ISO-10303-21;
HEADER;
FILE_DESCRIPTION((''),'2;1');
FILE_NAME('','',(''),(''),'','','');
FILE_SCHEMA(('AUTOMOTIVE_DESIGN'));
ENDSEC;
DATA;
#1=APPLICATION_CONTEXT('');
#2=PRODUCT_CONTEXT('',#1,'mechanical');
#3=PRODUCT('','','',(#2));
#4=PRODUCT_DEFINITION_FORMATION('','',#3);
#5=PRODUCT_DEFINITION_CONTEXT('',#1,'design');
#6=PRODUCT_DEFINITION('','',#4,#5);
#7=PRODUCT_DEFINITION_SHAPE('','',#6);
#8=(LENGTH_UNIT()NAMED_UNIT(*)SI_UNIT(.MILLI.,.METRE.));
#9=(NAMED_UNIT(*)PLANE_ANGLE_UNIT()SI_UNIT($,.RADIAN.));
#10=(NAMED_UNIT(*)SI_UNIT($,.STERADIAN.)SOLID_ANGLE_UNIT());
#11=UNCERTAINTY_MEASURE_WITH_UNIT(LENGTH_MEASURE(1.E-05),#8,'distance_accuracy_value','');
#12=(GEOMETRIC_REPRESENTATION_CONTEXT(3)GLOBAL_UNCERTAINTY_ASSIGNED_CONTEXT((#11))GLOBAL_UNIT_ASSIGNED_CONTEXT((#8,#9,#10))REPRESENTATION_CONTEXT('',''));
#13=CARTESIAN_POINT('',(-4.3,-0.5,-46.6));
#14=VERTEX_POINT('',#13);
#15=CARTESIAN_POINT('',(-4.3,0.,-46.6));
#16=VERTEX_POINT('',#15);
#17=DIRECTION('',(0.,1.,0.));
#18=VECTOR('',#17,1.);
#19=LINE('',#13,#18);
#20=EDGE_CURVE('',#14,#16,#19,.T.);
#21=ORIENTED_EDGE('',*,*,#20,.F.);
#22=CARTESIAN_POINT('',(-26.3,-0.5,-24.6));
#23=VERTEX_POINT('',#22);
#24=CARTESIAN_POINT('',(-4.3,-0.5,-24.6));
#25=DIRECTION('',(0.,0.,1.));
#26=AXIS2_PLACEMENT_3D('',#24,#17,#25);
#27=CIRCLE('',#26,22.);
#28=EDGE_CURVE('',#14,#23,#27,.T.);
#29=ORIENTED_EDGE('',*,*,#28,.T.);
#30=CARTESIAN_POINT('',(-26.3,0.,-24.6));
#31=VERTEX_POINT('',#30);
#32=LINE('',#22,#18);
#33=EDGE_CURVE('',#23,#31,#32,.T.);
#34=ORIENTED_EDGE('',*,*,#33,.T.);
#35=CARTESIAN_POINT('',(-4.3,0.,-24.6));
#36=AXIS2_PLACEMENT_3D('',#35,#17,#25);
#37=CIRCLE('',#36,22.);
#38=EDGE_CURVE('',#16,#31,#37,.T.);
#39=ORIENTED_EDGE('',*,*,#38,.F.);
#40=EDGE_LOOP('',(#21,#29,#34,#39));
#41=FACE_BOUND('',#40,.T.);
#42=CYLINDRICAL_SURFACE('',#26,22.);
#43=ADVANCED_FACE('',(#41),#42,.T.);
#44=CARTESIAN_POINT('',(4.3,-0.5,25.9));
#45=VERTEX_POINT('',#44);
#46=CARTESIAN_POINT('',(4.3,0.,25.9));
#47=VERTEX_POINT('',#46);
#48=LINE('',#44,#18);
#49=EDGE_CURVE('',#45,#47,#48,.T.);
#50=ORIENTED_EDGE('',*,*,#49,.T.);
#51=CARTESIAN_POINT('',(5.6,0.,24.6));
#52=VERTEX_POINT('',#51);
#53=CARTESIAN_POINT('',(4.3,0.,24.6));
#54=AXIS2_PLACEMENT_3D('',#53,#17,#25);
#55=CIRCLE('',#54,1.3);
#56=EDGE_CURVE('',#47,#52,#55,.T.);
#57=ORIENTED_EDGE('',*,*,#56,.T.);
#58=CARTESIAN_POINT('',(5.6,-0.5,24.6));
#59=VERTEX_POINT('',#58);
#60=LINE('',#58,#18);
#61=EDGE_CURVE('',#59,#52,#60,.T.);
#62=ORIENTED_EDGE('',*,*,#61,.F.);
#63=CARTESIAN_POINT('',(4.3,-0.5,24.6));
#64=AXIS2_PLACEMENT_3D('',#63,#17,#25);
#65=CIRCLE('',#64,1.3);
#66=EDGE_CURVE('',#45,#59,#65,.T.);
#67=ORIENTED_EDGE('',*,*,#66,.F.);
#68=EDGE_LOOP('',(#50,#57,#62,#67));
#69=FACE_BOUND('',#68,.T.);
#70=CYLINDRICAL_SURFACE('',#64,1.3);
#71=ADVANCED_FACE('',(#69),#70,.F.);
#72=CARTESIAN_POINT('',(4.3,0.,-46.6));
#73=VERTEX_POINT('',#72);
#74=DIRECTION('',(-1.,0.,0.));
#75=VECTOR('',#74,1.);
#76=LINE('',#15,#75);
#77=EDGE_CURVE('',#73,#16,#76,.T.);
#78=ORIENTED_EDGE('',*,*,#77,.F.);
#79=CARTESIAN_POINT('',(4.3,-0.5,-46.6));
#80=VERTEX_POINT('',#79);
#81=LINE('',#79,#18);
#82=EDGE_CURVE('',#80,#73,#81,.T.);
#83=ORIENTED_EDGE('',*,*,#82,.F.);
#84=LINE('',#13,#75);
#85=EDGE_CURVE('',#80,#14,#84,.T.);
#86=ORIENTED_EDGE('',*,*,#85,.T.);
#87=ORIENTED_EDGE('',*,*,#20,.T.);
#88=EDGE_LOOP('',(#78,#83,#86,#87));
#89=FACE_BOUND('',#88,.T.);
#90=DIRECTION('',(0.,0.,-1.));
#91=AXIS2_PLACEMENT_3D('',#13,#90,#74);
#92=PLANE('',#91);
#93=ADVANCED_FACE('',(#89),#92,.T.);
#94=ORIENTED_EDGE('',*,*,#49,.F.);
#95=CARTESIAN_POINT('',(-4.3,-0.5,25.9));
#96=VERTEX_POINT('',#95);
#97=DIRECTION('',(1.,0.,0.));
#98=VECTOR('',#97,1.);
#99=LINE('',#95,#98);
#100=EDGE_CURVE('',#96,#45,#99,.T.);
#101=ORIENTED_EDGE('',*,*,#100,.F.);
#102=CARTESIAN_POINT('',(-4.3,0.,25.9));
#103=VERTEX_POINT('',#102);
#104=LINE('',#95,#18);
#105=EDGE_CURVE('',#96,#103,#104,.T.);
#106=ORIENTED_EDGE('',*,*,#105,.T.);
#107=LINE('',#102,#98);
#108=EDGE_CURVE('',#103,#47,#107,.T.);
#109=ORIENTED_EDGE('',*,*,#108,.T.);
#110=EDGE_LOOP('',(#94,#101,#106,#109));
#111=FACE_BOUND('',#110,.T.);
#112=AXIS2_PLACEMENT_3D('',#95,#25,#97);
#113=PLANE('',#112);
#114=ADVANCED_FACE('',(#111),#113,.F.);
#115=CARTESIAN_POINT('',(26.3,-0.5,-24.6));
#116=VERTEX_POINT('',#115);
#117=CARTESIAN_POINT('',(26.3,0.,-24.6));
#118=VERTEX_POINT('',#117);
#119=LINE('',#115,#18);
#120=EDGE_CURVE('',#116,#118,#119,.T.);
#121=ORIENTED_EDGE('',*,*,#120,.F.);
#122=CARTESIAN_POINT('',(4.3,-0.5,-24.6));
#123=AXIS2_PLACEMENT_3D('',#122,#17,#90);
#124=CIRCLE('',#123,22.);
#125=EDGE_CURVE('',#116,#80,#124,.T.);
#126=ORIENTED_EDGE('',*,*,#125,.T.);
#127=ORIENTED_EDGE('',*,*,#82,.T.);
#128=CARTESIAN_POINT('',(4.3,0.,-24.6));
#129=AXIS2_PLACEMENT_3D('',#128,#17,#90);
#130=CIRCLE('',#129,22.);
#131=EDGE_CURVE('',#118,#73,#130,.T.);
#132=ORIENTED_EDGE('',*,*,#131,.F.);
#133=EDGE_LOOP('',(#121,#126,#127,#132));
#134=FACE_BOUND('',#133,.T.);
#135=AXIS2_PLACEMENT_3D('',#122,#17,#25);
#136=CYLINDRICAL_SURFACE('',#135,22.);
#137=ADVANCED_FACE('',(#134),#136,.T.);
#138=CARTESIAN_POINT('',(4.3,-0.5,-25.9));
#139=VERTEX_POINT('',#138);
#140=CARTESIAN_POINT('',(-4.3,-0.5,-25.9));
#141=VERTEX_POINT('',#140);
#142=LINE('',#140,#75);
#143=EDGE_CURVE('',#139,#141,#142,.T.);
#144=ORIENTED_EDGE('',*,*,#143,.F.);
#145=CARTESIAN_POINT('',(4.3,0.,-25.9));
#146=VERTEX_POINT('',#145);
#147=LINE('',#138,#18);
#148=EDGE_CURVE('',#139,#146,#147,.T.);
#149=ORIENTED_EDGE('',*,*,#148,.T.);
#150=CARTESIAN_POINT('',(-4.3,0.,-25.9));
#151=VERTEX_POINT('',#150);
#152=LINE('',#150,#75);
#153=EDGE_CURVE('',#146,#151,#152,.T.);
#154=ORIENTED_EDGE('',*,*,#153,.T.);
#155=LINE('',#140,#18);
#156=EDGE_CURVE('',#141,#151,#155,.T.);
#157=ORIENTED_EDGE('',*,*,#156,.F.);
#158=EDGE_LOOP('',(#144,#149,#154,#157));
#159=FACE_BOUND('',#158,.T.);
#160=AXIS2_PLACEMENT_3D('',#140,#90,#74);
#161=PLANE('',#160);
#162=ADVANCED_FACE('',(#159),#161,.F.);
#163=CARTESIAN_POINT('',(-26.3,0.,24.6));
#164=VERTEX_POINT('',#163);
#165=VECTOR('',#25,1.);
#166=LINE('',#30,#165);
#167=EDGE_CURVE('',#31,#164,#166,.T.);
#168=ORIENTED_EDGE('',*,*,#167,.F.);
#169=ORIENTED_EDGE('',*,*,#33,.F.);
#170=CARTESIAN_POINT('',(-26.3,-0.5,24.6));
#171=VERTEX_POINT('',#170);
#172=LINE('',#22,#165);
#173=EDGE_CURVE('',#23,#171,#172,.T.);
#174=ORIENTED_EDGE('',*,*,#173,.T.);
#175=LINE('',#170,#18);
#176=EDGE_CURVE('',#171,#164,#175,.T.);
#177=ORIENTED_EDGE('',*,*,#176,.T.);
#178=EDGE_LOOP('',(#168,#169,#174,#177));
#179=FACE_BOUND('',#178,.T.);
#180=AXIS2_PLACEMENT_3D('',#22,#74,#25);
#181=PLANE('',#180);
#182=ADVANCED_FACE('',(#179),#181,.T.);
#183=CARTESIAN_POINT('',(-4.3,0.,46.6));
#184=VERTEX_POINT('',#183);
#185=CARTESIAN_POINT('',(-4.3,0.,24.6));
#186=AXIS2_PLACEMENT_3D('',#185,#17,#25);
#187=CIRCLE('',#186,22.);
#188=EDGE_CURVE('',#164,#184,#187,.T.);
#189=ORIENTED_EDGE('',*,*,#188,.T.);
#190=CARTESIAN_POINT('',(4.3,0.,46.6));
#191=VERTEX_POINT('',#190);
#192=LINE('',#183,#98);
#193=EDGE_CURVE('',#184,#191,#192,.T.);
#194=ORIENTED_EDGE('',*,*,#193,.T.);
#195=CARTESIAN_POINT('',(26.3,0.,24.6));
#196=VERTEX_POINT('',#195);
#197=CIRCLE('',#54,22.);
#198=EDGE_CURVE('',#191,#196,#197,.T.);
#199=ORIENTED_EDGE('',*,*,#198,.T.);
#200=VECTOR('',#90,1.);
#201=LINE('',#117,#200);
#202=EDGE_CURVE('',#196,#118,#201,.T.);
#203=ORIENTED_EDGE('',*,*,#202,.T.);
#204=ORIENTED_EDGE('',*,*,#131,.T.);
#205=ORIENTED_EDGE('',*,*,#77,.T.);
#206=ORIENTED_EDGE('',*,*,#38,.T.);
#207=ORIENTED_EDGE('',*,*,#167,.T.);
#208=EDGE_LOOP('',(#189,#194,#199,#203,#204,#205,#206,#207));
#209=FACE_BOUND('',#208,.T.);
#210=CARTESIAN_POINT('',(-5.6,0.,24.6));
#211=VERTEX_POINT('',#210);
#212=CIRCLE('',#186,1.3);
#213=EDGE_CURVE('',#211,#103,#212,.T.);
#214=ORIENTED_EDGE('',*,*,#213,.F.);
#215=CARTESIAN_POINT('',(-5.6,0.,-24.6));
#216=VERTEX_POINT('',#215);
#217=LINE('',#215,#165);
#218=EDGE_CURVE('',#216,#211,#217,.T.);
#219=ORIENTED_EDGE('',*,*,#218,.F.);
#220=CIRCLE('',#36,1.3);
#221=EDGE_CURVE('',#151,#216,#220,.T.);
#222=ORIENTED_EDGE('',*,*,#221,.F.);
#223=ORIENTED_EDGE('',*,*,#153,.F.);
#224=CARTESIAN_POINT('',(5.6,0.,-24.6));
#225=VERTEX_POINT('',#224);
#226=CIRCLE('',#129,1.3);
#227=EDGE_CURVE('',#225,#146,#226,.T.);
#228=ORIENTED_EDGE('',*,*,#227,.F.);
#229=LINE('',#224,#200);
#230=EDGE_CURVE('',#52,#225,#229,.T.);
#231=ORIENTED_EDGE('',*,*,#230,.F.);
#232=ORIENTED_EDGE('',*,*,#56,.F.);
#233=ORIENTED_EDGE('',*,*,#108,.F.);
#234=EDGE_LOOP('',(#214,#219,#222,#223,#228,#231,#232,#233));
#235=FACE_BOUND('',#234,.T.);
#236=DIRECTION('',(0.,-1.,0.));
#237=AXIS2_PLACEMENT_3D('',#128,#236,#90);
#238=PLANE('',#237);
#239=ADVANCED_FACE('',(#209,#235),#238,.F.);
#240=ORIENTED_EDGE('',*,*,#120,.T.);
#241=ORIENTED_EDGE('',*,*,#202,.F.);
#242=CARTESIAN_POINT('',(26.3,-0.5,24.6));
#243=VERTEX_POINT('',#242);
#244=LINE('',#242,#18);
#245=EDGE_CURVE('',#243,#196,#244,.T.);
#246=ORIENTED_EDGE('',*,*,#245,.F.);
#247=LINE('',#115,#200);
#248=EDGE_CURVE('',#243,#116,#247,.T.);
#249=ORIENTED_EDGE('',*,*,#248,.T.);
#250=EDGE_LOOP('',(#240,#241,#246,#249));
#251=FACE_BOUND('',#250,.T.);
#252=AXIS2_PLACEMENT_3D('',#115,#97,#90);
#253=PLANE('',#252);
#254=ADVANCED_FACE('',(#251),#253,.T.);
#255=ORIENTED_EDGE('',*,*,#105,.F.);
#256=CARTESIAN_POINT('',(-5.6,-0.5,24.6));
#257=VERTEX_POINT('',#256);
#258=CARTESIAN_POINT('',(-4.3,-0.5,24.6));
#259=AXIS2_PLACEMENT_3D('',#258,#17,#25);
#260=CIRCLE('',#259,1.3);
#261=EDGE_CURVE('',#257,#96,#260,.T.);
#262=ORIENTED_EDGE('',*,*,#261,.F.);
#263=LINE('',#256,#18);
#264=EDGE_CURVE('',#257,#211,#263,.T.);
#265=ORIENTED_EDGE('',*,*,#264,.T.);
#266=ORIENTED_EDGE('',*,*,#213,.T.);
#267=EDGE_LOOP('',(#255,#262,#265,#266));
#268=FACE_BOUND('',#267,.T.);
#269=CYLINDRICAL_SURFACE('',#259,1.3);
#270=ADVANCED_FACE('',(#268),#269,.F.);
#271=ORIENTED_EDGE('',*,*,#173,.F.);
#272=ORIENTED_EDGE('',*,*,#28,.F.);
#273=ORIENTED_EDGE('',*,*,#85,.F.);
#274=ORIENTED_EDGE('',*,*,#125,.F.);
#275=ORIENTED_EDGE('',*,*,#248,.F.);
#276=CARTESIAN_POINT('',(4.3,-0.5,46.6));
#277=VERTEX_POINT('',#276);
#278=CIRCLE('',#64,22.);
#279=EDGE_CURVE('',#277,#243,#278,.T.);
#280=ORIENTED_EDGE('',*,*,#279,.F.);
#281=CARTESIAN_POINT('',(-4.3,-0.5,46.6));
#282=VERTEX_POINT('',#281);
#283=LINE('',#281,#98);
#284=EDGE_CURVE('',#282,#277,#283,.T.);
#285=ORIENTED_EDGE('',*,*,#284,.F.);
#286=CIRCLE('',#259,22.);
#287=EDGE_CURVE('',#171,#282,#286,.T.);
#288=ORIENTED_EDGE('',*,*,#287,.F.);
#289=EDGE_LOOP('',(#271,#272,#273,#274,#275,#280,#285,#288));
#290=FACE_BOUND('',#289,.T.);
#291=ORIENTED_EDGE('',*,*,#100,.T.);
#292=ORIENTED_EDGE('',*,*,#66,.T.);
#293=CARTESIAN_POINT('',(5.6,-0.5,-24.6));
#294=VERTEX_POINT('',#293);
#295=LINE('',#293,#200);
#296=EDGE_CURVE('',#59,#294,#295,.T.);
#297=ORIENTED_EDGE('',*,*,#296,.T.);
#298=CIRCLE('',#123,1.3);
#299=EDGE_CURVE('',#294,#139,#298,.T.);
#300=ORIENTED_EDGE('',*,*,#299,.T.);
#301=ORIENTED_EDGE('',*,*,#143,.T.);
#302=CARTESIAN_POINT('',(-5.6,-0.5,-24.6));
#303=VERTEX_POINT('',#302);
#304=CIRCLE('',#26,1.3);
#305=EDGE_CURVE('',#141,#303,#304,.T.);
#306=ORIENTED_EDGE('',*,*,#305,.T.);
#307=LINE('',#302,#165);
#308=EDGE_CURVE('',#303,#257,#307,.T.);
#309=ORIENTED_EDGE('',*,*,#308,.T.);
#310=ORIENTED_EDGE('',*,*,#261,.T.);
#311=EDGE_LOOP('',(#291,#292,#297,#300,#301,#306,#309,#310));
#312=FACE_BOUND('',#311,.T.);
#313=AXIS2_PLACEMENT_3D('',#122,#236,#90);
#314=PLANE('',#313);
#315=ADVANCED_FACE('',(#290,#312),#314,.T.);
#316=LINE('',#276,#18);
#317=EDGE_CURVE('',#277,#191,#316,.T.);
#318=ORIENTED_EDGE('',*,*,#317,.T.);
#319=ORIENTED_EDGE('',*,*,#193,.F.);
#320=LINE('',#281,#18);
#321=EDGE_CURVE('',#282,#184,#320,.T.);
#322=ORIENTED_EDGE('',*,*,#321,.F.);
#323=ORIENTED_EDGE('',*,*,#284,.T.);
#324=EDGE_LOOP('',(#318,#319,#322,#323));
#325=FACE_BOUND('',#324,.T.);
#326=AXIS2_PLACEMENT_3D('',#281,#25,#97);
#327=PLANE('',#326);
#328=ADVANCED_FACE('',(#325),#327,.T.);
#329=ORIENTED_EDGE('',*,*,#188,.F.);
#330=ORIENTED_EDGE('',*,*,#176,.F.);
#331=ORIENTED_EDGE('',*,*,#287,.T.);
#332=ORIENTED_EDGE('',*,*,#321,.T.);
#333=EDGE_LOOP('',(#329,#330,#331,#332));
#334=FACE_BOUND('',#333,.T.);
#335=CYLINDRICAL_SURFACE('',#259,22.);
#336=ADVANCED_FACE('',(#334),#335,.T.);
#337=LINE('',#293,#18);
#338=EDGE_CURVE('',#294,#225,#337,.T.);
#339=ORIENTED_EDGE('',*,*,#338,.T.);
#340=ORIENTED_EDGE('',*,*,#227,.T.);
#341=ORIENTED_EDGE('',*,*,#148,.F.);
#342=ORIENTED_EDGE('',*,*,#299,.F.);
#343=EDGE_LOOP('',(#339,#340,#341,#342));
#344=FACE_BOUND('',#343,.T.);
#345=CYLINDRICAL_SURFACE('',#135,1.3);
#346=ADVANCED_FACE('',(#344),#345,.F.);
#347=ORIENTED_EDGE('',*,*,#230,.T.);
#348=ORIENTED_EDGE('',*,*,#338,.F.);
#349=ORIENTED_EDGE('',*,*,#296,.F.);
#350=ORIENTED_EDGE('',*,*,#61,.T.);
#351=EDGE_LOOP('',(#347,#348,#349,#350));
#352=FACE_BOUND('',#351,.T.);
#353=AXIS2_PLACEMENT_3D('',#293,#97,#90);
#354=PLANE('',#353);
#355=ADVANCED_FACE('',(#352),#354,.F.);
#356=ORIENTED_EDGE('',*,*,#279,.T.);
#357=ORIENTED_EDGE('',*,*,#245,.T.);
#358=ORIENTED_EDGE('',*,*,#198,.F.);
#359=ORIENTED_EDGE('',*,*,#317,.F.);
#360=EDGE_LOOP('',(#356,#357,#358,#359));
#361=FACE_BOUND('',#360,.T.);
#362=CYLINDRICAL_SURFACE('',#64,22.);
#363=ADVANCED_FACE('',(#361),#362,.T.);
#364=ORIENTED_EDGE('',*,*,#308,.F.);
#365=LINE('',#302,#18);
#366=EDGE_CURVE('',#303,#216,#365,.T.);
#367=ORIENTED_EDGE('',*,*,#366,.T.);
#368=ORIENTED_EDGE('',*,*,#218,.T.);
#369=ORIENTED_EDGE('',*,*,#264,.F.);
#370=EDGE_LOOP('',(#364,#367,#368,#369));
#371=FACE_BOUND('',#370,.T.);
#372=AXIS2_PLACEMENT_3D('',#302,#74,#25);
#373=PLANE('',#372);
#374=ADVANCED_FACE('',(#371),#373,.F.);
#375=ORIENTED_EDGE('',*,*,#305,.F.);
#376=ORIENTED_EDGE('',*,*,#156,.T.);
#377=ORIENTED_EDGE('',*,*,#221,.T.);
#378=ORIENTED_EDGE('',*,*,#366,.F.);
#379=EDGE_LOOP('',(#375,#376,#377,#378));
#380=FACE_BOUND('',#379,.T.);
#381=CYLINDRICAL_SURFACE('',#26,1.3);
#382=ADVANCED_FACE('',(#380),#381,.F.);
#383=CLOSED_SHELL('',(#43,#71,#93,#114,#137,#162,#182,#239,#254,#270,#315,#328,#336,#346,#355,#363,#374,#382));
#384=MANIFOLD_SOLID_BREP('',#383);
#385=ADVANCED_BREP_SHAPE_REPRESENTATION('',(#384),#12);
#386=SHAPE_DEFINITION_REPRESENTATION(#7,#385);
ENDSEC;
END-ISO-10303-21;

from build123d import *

# Parameters (mm, degrees)
SM_BASE_FLANGE_1_DEPTH = 0.5


# Sheet-metal steps are written as plain solids
with BuildPart() as part:
    # Sketch 1 → Базовая кромка1 (new body)
    with BuildSketch(Plane(origin=(0, 0, 0), x_dir=(1, 0, 0), z_dir=(0, 1, 0))):
        with BuildLine():
            Line((-4.3, 46.6), (4.3, 46.6))
            ThreePointArc((4.3, 46.6), (19.856349186, 40.156349186), (26.3, 24.6))
            Line((26.3, 24.6), (26.3, -24.6))
            ThreePointArc((26.3, -24.6), (19.856349186, -40.156349186), (4.3, -46.6))
            Line((4.3, -46.6), (-4.3, -46.6))
            ThreePointArc((-4.3, -46.6), (-19.856349186, -40.156349186), (-26.3, -24.6))
            Line((-26.3, -24.6), (-26.3, 24.6))
            ThreePointArc((-26.3, 24.6), (-19.856349186, 40.156349186), (-4.3, 46.6))
        make_face()
        with BuildLine():
            Line((-4.3, 25.9), (4.3, 25.9))
            ThreePointArc((4.3, 25.9), (5.219238816, 25.519238816), (5.6, 24.6))
            Line((5.6, 24.6), (5.6, -24.6))
            ThreePointArc((5.6, -24.6), (5.219238816, -25.519238816), (4.3, -25.9))
            Line((4.3, -25.9), (-4.3, -25.9))
            ThreePointArc((-4.3, -25.9), (-5.219238816, -25.519238816), (-5.6, -24.6))
            Line((-5.6, -24.6), (-5.6, 24.6))
            ThreePointArc((-5.6, 24.6), (-5.219238816, 25.519238816), (-4.3, 25.9))
        make_face(mode=Mode.SUBTRACT)
    extrude(amount=-SM_BASE_FLANGE_1_DEPTH)


solid = part.part
